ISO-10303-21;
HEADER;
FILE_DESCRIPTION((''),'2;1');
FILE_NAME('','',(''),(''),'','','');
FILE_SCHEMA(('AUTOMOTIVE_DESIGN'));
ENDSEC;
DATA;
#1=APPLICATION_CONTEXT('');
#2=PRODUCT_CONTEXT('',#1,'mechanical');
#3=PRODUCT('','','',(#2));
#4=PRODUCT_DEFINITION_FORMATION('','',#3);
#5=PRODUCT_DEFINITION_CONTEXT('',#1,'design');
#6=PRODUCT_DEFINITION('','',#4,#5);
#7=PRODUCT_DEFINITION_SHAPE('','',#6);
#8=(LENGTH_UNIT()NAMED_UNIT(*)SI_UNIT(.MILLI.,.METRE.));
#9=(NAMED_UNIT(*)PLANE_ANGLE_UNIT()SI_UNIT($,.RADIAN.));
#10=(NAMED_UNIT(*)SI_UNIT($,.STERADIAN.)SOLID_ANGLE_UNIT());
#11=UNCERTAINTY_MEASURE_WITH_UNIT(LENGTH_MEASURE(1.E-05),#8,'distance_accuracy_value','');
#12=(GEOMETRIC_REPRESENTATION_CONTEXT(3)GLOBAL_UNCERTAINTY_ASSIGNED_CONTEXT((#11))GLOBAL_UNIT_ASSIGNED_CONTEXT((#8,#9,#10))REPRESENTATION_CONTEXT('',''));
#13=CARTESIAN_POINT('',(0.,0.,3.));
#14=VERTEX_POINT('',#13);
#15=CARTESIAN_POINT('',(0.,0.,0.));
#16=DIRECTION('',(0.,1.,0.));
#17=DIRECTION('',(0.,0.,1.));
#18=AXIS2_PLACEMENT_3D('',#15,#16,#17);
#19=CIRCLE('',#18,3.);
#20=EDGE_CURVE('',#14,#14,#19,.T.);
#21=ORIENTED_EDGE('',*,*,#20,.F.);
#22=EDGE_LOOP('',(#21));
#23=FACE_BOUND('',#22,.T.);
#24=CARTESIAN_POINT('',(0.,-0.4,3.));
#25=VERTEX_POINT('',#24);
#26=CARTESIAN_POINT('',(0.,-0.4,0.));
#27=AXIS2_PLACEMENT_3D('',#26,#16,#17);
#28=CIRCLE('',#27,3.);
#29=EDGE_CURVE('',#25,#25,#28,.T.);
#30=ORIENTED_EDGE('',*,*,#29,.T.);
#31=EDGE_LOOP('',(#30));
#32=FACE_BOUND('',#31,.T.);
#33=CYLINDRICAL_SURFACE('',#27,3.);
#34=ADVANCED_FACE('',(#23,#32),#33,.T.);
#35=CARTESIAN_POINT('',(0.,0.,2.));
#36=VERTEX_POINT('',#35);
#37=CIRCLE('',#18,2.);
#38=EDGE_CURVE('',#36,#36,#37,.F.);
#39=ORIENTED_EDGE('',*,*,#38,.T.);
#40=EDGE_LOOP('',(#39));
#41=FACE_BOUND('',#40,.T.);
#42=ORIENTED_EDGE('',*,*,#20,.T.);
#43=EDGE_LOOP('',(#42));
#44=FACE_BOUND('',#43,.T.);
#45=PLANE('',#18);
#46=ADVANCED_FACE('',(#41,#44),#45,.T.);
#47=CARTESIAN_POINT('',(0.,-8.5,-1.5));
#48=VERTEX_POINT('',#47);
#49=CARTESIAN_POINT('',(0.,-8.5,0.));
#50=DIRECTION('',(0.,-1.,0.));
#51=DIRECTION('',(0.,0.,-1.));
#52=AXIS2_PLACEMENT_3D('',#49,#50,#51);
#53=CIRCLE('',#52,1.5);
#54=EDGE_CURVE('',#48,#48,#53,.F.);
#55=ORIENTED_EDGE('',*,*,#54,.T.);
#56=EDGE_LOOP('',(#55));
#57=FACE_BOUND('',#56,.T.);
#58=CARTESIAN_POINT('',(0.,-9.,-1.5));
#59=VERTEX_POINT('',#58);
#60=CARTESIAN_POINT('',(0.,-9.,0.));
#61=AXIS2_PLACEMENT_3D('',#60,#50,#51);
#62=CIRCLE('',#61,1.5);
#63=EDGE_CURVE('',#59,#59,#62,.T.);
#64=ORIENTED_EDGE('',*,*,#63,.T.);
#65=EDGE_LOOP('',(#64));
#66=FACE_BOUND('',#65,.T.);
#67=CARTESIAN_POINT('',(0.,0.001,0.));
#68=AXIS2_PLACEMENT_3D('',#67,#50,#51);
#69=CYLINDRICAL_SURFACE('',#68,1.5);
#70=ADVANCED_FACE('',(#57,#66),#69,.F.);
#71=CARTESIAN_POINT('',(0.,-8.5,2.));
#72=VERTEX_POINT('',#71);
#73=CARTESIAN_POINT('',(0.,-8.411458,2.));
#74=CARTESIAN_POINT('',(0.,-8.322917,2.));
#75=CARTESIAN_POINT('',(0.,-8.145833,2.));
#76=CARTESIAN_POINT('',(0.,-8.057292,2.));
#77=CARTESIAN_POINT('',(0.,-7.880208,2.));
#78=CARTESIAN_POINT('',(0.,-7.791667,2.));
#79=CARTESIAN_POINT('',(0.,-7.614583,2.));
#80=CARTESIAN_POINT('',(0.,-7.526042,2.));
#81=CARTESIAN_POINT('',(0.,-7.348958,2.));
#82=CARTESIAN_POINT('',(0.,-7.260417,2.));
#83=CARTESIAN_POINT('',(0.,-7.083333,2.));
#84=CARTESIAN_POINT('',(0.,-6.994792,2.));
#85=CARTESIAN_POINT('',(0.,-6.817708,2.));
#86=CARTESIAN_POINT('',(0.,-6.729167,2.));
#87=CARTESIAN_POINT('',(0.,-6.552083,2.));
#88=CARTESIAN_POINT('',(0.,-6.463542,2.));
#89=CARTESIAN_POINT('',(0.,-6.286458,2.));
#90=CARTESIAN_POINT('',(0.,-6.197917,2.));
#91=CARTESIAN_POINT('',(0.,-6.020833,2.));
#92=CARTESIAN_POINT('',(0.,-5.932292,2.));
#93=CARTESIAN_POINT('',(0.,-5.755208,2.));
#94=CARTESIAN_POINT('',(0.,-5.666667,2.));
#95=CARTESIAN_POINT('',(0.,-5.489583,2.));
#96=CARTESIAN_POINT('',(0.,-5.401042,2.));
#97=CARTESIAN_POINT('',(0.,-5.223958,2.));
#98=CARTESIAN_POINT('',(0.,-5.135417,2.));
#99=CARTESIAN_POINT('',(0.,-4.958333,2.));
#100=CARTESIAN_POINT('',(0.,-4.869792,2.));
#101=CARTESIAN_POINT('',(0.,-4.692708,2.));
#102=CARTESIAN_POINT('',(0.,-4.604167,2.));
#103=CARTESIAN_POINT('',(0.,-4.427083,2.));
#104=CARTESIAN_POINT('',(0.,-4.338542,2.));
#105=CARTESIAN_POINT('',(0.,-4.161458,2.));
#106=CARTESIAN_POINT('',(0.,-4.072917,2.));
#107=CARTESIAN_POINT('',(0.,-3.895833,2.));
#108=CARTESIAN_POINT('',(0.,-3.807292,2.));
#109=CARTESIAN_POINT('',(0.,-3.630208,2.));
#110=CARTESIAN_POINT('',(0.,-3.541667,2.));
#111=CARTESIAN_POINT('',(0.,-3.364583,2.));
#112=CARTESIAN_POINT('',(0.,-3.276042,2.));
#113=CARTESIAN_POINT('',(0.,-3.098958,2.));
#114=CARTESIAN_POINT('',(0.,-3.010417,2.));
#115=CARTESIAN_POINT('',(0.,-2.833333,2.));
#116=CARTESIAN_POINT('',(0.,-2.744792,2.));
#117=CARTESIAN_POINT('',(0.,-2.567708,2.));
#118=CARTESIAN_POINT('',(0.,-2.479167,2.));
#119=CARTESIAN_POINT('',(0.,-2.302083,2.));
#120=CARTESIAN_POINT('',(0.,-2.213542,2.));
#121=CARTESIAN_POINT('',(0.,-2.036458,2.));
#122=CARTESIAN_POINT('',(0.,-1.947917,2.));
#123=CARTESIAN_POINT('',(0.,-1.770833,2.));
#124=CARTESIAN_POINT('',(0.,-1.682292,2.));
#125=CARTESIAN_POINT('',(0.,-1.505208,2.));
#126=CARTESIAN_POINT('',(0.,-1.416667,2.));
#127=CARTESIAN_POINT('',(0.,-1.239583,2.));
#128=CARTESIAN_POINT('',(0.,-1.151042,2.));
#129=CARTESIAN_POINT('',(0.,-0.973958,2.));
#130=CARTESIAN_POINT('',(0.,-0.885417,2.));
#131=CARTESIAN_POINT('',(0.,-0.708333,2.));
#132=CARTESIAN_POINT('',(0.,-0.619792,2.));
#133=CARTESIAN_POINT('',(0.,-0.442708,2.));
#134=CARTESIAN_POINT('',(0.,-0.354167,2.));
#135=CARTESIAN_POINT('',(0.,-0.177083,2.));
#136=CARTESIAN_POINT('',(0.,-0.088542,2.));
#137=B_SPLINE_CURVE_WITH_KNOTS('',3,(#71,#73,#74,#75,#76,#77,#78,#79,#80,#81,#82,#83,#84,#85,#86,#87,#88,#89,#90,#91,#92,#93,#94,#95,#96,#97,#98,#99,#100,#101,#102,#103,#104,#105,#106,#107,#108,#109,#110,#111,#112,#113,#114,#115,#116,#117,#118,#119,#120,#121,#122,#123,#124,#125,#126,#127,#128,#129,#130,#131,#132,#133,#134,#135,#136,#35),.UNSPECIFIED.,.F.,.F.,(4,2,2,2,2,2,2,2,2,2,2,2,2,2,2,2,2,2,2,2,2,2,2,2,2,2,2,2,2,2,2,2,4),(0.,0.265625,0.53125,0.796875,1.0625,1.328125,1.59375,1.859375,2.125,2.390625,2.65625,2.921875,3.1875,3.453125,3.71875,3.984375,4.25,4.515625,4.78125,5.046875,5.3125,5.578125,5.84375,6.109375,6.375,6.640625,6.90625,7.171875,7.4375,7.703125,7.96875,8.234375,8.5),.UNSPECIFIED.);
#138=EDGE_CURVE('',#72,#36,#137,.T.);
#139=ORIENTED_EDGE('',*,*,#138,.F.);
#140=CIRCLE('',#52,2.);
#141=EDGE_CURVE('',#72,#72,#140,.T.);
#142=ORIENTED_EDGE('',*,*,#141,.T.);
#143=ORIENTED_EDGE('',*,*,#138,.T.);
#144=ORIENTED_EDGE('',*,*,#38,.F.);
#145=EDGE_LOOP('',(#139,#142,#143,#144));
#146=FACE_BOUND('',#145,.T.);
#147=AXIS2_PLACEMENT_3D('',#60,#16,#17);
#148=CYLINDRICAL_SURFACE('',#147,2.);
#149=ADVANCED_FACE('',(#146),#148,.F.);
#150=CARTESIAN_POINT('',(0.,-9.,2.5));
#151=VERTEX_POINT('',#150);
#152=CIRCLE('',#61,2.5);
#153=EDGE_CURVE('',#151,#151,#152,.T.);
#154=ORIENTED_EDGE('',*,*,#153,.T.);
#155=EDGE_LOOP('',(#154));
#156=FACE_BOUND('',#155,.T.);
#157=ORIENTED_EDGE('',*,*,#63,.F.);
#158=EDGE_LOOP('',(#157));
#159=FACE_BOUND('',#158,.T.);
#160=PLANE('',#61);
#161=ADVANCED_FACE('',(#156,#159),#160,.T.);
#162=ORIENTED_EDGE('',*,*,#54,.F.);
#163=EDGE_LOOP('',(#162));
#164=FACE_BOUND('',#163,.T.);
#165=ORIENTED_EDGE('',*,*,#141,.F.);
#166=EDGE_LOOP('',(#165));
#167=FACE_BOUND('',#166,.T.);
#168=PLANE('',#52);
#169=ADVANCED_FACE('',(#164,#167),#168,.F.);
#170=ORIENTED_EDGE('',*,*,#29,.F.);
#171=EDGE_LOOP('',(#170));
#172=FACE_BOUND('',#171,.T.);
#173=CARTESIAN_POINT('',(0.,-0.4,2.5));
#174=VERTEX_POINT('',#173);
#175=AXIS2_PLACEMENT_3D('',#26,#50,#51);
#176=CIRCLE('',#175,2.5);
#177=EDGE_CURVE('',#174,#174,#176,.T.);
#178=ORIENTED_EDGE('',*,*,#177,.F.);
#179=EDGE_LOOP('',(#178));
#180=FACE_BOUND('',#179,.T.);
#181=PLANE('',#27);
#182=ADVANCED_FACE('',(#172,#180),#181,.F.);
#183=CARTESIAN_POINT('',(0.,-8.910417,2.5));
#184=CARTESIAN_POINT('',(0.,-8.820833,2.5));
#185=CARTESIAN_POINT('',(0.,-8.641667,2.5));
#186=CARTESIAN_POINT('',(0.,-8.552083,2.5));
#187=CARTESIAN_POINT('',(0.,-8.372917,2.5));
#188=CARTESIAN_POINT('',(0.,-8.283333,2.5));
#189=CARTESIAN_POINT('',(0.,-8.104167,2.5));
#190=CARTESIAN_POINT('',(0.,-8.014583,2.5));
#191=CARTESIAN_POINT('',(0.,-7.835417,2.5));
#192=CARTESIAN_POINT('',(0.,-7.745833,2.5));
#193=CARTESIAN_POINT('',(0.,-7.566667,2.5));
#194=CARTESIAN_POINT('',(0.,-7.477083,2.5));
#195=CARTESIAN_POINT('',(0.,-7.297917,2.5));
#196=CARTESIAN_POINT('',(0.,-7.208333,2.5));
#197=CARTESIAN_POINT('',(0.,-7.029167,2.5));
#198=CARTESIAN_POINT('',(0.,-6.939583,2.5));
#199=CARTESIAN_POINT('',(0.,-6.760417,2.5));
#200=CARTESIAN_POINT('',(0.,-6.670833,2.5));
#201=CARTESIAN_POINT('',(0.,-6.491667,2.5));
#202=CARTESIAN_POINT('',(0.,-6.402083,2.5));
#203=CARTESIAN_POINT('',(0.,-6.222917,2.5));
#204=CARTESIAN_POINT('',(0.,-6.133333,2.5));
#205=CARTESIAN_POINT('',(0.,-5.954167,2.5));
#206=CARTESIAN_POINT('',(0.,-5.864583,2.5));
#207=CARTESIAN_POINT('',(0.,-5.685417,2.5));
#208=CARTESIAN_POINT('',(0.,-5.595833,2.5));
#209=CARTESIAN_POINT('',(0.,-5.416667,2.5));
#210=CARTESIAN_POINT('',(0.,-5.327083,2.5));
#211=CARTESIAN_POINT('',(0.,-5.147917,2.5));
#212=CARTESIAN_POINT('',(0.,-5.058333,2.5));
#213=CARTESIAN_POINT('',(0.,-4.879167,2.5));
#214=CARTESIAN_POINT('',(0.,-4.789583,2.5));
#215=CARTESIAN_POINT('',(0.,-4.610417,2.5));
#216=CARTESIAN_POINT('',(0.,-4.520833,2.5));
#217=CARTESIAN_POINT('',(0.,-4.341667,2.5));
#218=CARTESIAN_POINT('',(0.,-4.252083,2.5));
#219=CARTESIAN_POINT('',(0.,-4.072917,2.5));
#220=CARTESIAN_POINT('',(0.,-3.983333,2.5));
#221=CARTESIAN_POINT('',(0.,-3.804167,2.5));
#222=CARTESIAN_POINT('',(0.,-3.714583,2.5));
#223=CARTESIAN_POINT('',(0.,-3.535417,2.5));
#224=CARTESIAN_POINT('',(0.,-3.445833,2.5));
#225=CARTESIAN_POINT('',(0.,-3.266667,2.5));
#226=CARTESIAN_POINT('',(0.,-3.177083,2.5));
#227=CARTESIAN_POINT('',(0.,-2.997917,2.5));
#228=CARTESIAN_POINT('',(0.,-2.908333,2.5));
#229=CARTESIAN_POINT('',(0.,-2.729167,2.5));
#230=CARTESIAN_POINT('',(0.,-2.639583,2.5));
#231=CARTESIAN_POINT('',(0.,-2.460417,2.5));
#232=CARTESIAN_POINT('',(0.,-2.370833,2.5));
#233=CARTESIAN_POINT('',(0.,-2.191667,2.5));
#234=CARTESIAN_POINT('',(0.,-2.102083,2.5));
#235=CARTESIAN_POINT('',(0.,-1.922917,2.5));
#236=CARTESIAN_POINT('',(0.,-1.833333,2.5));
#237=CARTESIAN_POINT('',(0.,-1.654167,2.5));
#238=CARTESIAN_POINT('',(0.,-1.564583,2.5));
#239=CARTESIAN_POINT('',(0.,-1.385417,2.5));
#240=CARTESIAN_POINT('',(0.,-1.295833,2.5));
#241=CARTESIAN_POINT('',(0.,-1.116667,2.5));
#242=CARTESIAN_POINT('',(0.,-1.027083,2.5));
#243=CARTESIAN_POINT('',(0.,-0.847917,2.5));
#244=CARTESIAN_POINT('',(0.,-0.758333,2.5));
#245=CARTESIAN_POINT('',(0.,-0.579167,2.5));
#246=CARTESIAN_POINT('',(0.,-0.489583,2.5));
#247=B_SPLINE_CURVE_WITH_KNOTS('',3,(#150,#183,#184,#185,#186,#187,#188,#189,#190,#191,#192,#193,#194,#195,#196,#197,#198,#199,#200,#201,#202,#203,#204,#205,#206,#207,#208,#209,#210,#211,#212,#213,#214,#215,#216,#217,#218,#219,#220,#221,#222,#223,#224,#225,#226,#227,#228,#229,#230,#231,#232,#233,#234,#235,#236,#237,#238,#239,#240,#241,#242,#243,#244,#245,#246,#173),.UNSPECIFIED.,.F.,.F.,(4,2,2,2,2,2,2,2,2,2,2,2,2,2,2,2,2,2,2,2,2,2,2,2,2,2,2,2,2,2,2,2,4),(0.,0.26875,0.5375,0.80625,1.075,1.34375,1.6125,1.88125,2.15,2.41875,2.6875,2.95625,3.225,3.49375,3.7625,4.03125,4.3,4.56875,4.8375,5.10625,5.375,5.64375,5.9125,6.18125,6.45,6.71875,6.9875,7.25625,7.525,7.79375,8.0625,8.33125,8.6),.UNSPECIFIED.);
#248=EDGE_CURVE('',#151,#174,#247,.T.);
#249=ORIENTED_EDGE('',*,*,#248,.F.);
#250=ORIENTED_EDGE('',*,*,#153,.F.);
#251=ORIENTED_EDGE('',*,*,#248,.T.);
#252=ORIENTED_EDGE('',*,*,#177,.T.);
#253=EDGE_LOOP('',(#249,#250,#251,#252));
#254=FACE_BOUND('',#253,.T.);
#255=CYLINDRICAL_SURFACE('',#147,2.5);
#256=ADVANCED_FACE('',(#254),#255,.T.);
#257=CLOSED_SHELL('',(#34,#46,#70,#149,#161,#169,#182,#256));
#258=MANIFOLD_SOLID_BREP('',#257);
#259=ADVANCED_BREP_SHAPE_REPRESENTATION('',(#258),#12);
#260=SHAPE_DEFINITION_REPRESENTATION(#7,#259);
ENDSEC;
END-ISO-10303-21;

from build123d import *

# Parameters (mm, degrees)
SKETCH1_R           = 3
BOSS_EXTRUDE1_DEPTH = 0.4
SKETCH2_R           = 2.5
BOSS_EXTRUDE2_DEPTH = 8.6
SHELL1_START        = -8.5
SHELL1_OUTLINE_R    = 2
SHELL1_DEPTH        = 8.5
CUT_EXTRUDE1_REACH  = 11.95
SKETCH3_R           = 1.5


# Read off the part's stored shape, not the designer's step: Shell1
with BuildPart() as part:
    # Sketch1 → Boss-Extrude1 (new body)
    with BuildSketch(Plane(origin=(0, 0, 0), x_dir=(1, 0, 0), z_dir=(0, 1, 0))):
        with Locations(Location((0, 0, 0), (0, 0, 270))):
            Circle(SKETCH1_R)
    extrude(amount=-BOSS_EXTRUDE1_DEPTH)

    # Sketch2 → Boss-Extrude2 (add)
    with BuildSketch(Plane.XZ.offset(0.4)):
        with Locations(Location((0, 0, 0), (0, 0, 90))):
            Circle(SKETCH2_R)
    extrude(amount=BOSS_EXTRUDE2_DEPTH)

    # Shell1 outline → Shell1 (cut)
    with BuildSketch(Plane(origin=(0, 0, 0), x_dir=(1, 0, 0), z_dir=(0, 1, 0)).offset(SHELL1_START)):
        Circle(SHELL1_OUTLINE_R)
    extrude(amount=SHELL1_DEPTH, mode=Mode.SUBTRACT)

    # Sketch3 → Cut-Extrude1 (cut, up to next)
    with BuildSketch(Plane.XZ.offset(9), mode=Mode.PRIVATE) as cut_extrude1_sk1:
        with Locations(Location((0, 0, 0), (0, 0, 270))):
            Circle(SKETCH3_R)
    cut_extrude1_tool1 = extrude(cut_extrude1_sk1.sketch, amount=-CUT_EXTRUDE1_REACH, mode=Mode.PRIVATE) & part.part
    add(cut_extrude1_tool1.solids().sort_by_distance((0, -9, 0))[0], mode=Mode.SUBTRACT)


solid = part.part
